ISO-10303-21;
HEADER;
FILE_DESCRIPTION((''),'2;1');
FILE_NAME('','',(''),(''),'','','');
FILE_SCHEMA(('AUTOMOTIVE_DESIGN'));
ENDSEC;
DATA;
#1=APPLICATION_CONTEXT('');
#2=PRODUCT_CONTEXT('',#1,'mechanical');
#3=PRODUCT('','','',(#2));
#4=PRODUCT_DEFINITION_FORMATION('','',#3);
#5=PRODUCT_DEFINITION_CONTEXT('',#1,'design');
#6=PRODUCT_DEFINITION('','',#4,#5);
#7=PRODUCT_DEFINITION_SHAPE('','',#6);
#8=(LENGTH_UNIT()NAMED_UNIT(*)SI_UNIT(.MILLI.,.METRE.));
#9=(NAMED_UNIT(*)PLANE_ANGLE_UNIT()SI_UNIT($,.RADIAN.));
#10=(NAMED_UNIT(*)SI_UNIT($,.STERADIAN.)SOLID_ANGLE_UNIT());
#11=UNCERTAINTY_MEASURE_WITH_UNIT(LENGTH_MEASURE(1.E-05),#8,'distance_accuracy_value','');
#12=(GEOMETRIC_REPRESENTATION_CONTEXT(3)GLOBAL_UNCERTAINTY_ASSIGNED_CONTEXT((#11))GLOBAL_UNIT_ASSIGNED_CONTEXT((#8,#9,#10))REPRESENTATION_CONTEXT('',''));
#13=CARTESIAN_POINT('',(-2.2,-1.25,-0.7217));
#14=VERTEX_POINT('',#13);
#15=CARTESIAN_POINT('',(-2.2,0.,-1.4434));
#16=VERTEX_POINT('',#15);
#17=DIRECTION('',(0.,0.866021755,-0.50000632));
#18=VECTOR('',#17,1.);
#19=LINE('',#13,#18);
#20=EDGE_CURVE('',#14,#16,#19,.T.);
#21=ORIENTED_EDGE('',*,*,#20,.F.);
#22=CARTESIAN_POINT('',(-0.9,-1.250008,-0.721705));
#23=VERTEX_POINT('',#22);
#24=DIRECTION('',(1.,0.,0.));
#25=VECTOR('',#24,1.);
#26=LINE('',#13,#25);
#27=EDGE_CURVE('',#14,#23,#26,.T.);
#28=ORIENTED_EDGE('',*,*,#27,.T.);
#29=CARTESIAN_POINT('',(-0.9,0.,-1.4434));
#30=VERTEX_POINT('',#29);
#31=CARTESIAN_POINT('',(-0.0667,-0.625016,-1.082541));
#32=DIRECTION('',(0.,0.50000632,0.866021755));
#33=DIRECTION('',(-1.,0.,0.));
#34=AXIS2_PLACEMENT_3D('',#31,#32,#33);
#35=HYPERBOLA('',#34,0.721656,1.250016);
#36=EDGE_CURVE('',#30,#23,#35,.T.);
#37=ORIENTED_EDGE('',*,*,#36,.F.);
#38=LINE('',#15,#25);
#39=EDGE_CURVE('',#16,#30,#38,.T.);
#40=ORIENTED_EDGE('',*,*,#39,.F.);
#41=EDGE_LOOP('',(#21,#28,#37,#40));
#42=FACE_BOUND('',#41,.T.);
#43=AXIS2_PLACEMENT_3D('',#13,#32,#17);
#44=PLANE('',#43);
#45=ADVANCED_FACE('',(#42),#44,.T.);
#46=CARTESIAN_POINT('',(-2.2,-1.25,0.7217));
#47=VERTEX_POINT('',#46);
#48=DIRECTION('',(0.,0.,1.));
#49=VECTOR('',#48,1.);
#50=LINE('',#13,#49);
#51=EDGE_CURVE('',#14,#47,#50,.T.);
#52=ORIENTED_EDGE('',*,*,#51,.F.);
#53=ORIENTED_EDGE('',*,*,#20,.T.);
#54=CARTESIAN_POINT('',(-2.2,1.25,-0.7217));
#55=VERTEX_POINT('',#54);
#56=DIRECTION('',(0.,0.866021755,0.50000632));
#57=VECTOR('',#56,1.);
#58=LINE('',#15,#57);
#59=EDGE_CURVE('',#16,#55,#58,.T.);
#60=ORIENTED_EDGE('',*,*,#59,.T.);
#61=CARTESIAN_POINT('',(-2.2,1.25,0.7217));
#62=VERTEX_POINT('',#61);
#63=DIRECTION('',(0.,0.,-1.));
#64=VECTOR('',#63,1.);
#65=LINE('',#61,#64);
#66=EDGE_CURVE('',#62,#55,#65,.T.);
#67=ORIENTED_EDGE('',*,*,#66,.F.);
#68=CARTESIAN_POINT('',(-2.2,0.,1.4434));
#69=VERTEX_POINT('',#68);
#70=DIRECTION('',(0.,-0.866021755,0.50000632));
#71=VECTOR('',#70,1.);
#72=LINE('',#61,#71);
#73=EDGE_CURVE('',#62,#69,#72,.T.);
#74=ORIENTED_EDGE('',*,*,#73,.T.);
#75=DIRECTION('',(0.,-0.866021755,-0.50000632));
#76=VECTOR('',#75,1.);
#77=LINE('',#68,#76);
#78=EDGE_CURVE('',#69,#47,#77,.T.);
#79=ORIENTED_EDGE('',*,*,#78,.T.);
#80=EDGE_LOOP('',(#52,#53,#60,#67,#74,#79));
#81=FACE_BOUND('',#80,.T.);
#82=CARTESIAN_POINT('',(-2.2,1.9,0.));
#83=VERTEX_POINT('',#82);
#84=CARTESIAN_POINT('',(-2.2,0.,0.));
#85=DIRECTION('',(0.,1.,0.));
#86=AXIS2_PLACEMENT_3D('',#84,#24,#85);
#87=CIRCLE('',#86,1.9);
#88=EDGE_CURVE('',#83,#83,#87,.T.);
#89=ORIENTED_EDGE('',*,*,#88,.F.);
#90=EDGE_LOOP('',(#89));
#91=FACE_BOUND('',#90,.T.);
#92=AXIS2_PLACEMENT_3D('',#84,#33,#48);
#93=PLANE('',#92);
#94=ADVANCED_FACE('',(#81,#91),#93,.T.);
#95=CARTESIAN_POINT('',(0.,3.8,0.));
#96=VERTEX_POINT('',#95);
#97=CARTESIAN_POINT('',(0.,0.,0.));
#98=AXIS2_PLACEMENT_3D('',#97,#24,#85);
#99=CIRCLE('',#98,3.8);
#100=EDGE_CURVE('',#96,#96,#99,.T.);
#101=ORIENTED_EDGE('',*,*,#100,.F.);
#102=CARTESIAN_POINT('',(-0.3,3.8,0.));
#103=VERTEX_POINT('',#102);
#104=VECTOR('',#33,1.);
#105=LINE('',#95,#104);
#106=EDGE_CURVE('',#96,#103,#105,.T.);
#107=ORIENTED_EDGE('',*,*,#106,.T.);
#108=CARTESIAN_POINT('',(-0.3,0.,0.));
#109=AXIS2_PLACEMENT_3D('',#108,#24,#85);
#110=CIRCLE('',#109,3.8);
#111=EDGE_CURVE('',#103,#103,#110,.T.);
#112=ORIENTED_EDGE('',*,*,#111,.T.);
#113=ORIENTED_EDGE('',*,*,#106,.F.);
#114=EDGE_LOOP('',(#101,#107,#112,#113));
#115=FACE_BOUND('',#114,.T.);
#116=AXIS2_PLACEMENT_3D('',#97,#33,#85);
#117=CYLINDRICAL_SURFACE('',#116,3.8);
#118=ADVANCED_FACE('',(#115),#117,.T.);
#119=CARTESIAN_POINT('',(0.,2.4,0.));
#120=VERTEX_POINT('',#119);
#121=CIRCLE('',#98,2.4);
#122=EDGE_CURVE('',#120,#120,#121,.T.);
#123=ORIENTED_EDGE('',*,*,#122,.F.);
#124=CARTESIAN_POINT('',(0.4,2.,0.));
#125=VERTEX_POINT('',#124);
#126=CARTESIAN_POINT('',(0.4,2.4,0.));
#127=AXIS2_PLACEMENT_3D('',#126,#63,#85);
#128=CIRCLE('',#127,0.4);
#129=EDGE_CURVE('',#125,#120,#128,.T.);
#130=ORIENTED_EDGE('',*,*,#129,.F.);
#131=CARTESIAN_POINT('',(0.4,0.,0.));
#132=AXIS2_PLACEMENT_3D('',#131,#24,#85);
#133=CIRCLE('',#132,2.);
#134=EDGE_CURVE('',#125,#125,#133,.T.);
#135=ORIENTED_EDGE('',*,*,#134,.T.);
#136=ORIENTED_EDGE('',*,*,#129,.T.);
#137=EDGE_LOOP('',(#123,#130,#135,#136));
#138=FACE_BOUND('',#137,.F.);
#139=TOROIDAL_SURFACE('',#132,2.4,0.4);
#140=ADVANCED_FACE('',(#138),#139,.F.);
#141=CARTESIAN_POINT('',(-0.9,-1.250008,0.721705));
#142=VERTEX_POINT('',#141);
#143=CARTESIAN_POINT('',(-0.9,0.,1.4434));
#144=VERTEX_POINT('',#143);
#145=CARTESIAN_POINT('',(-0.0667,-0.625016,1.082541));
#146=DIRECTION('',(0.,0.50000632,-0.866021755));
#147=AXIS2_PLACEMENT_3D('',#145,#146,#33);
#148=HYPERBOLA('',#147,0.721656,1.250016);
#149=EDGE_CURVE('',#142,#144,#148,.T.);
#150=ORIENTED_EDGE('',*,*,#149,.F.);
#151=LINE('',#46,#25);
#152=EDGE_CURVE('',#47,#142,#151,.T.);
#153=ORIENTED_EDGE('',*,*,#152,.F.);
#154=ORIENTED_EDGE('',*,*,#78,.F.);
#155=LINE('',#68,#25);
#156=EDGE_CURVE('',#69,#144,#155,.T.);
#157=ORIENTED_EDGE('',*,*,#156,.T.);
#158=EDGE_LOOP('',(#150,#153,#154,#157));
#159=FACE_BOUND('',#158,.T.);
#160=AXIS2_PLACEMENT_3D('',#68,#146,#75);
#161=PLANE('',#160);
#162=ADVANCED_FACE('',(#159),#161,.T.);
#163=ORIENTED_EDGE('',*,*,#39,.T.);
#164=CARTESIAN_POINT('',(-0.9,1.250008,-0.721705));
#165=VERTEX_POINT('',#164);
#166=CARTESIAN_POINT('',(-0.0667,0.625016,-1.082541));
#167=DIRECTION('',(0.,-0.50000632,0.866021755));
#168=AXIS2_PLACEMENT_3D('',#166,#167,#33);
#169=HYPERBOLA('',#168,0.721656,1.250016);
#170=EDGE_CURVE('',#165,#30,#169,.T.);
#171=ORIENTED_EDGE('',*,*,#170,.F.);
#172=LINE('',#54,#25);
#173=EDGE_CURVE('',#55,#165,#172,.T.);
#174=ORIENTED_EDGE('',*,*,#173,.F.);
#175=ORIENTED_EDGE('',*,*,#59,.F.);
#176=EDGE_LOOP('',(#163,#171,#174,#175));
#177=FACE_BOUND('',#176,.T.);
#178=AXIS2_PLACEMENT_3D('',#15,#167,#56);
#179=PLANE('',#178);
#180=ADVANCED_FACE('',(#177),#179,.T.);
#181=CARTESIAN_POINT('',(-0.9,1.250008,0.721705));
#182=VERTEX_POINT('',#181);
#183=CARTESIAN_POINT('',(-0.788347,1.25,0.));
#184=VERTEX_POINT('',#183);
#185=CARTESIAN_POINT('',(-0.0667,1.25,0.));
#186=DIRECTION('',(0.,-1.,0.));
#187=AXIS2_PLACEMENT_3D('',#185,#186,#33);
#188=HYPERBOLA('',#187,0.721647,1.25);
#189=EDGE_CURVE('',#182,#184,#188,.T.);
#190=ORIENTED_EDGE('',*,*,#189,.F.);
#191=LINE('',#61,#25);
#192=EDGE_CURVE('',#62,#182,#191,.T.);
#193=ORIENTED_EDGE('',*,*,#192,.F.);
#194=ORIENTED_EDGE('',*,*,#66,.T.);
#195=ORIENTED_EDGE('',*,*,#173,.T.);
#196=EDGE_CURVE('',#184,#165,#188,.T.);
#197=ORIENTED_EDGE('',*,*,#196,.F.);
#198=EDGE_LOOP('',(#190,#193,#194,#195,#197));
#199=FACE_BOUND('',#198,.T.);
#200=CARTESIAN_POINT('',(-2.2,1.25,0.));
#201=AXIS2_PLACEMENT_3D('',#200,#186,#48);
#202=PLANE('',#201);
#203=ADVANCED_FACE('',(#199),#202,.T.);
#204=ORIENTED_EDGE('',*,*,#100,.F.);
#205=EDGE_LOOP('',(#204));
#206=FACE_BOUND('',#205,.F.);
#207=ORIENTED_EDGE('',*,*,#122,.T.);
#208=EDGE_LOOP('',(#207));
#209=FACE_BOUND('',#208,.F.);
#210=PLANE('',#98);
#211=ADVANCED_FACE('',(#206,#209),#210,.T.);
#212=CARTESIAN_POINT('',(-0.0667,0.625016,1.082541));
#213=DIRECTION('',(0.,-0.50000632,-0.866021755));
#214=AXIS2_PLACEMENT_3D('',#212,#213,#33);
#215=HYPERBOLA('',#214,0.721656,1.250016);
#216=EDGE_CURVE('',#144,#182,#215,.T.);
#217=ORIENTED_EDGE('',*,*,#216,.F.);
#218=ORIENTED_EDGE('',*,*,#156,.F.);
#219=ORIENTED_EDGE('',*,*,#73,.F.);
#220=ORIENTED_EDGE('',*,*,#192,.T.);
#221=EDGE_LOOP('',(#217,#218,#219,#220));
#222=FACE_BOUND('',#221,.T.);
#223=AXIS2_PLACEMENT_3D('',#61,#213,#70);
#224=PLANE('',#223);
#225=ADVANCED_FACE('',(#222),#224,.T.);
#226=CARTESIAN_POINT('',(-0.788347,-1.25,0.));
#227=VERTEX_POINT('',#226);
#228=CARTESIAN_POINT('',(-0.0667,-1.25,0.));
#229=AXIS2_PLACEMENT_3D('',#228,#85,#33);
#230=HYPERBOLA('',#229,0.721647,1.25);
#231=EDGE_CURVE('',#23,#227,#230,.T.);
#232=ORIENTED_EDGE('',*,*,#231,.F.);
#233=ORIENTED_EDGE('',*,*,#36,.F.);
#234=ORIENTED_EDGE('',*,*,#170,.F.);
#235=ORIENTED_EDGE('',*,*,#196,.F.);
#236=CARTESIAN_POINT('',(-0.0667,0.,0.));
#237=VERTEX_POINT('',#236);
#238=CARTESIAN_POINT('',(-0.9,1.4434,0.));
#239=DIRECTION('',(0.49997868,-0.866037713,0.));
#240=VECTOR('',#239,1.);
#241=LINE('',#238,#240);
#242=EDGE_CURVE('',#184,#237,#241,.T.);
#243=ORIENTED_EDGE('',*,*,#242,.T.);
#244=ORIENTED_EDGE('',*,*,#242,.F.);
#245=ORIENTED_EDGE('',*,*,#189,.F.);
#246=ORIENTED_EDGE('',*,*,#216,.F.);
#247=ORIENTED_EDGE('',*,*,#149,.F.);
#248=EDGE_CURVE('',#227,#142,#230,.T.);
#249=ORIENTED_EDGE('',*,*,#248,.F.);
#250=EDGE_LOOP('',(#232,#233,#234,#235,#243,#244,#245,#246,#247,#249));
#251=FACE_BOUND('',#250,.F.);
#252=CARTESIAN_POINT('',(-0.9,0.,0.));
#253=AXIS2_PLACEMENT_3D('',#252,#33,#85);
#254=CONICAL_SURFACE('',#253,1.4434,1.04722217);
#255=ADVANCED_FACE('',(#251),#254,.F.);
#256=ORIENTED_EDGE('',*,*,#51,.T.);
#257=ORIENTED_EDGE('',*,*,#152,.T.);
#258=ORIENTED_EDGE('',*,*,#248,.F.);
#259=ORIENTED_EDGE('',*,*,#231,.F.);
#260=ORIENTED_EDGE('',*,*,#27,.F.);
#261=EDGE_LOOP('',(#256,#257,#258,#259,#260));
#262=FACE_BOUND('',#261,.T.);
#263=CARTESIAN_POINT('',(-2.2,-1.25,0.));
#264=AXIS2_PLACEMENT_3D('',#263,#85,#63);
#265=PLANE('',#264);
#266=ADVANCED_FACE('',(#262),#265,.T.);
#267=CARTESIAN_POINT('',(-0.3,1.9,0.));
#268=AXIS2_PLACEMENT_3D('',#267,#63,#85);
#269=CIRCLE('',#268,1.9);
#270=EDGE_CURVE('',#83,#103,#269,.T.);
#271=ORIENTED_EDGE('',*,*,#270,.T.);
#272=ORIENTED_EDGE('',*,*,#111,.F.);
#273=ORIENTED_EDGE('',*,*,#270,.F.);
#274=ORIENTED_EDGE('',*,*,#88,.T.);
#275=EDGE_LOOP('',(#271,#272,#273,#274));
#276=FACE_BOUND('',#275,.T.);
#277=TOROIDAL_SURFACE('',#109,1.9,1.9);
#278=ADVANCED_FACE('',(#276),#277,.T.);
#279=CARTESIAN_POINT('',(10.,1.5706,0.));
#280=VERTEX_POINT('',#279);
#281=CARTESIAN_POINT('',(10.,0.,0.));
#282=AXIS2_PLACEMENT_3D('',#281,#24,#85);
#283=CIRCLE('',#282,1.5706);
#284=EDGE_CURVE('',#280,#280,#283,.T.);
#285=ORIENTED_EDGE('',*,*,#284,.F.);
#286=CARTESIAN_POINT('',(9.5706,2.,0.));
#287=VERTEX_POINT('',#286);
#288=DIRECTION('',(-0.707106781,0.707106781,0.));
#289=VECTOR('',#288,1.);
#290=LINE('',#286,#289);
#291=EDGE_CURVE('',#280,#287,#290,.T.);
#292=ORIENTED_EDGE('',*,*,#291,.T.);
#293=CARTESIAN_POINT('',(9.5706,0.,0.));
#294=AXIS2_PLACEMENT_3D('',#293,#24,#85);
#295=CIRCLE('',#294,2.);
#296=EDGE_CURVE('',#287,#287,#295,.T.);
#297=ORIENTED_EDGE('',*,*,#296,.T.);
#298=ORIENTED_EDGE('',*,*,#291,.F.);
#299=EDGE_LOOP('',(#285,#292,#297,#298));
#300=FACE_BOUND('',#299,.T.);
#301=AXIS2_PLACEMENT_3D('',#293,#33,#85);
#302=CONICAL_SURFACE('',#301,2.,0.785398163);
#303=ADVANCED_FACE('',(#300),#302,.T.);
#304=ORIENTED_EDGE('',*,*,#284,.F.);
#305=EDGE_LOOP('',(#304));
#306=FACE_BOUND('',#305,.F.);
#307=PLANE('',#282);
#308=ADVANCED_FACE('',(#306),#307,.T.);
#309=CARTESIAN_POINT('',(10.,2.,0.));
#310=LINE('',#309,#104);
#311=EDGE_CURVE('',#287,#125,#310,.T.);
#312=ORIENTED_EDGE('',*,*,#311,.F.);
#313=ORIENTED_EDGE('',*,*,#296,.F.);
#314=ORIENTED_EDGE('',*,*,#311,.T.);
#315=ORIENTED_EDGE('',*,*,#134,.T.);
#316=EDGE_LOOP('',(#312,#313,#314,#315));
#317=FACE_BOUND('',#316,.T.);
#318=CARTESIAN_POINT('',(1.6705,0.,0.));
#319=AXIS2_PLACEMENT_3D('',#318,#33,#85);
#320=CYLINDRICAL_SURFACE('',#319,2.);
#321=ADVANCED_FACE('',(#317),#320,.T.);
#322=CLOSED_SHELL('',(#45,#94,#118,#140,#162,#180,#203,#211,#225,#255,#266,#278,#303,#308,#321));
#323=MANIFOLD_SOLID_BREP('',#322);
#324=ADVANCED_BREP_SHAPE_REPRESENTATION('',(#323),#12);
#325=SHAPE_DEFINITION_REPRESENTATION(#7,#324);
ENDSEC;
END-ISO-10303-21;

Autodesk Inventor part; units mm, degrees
ref_plane "YZ Plane" through (0, 0, 0) normal (1, 0, 0) x (0, 1, 0)
ref_plane "XZ Plane" through (0, 0, 0) normal (0, 1, 0) x (-1, 0, 0)
sketch "Sketch1" plane through (0, 0, 0) normal (0, 0, 1) x (1, 0, 0)
  line L0 (-0.0667, 0) -> (10, 0)
  line L1 (10, 0) -> (10, 2)
  line L2 (10, 2) -> (2.1, 2)
  line L3 (2.1, 2) -> (1.6705, 2)
  line L4 (1.6705, 2) -> (0, 2)
  line L5 (0, 2) -> (0, 3.8)
  line L6 (0, 3.8) -> (-2.2, 3.8)
  line L7 (-2.2, 3.8) -> (-2.2, 1.4434)
  line L8 (-2.2, 1.4434) -> (-0.9, 1.4434)
  line L9 (-0.9, 1.4434) -> (-0.0667, 0)
  line L10 (-4.64, 0) -> (12.44, 0) projected
  line L11 (0, -0.76) -> (0, 4.56) projected
  line L12 (2.1, 2) -> (0, 2) construction
  dimension "d1" = 7.9
  dimension "d2" = 0.4295
  dimension "d3" = 2.2
  dimension "d4" = 1.3
  dimension "d5" = 60
  dimension "d6" = 4
  dimension "d7" = 4
  dimension "d8" = 2.8868
  dimension "d9" = 7.6
  dimension "d26" = 10
revolve "Body" add sketch "Sketch1" angle 360 about axis through (-0.0667, 0, 0) along (1, 0, 0)
sketch "Sketch2" plane through (-2.2, 0, 0) normal (-1, 0, 0) x (0, 0, 1)
  circle A0 centre (0, 0) radius 1.4434 projected
  line L0 (0, -5.32) -> (0, 5.32) projected
  line L1 (-5.32, 0) -> (5.32, 0) projected
  line L2 (1.4434, 0) -> (0.7217, -1.25)
  line L3 (0.7217, -1.25) -> (-0.7217, -1.25)
  line L4 (-0.7217, -1.25) -> (-1.4434, 0)
  line L5 (-1.4434, 0) -> (-0.7217, 1.25)
  line L6 (-0.7217, 1.25) -> (0.7217, 1.25)
  line L7 (0.7217, 1.25) -> (1.4434, 0)
extrude "Slot" add sketch "Sketch2" against normal up to next contours L7 A0 | A0 L2 | L6 L0 A0 | A0 L0 L3 | L0 L6 A0 | A0 L3 L0 | L4 A0 | A0 L5
fillet "Fillet1" radius 1.9 1 edges at (-2.2, -3.8, 0)
thread "Thread" size "M4x0.7" class "6g" standard "ISO Metric profile" length 7.9
chamfer "Chamfer1" distance 0.4294 distance2 0.4294 1 edges at (10, -2, 0) measured on face at (10, 0.556, 0.0273)
ref_plane "Work Plane1" through (29, 0, 0) normal (0, -1, 0) x (1, 0, 0)
fillet "Fillet2" radius 0.4 1 edges at (0, -2, 0)
equation "\"d30\" = R"
equation "\"d17\" = RR"
equation "\"d13\" = GEL"
equation "\"d15\" = -0.5 * SPD + 0.5 * GD"
equation "\"d16\" = GUL"
equation "\"d1\" = GEL"
equation "\"d3\" = KOH"
equation "\"d4\" = INTI"
equation "\"d6\" = GD"
equation "\"d7\" = BDM"
equation "\"d8\" = 1.1547 * SW"
equation "\"d9\" = KOD"
equation "\"d26\" = NLG"
equation "\"GD\" = NND"
equation "\"NLG\" = 10"
equation "\"GEL\" = 7.9"
equation "\"KOD\" = 7.6"
equation "\"KOH\" = 2.2"
equation "\"INTI\" = 1.3"
equation "\"GAL\" = 0.61345 * PTC"
equation "\"GUL\" = 0.61345 * PTC"
equation "\"BDM\" = NND"
equation "\"SW\" = 2.5"
equation "\"RR\" = 1.9"
equation "\"SPD\" = NND - 1.2269 * PTC"
equation "\"R\" = 0.4"
equation "\"TOA\" = 30deg"
equation "\"GD1\" = THREADDIA - 1.2269 * PTC"
equation "\"THREADDIA\" = 4"
equation "\"PTC\" = 0.7"
equation "\"NND\" = 4"
equation "\"KOH1\" = 0.3"
equation "\"E0\" = 2.873"
properties part number "ISO 7380-1 - M4 x 10" material "Steel"
